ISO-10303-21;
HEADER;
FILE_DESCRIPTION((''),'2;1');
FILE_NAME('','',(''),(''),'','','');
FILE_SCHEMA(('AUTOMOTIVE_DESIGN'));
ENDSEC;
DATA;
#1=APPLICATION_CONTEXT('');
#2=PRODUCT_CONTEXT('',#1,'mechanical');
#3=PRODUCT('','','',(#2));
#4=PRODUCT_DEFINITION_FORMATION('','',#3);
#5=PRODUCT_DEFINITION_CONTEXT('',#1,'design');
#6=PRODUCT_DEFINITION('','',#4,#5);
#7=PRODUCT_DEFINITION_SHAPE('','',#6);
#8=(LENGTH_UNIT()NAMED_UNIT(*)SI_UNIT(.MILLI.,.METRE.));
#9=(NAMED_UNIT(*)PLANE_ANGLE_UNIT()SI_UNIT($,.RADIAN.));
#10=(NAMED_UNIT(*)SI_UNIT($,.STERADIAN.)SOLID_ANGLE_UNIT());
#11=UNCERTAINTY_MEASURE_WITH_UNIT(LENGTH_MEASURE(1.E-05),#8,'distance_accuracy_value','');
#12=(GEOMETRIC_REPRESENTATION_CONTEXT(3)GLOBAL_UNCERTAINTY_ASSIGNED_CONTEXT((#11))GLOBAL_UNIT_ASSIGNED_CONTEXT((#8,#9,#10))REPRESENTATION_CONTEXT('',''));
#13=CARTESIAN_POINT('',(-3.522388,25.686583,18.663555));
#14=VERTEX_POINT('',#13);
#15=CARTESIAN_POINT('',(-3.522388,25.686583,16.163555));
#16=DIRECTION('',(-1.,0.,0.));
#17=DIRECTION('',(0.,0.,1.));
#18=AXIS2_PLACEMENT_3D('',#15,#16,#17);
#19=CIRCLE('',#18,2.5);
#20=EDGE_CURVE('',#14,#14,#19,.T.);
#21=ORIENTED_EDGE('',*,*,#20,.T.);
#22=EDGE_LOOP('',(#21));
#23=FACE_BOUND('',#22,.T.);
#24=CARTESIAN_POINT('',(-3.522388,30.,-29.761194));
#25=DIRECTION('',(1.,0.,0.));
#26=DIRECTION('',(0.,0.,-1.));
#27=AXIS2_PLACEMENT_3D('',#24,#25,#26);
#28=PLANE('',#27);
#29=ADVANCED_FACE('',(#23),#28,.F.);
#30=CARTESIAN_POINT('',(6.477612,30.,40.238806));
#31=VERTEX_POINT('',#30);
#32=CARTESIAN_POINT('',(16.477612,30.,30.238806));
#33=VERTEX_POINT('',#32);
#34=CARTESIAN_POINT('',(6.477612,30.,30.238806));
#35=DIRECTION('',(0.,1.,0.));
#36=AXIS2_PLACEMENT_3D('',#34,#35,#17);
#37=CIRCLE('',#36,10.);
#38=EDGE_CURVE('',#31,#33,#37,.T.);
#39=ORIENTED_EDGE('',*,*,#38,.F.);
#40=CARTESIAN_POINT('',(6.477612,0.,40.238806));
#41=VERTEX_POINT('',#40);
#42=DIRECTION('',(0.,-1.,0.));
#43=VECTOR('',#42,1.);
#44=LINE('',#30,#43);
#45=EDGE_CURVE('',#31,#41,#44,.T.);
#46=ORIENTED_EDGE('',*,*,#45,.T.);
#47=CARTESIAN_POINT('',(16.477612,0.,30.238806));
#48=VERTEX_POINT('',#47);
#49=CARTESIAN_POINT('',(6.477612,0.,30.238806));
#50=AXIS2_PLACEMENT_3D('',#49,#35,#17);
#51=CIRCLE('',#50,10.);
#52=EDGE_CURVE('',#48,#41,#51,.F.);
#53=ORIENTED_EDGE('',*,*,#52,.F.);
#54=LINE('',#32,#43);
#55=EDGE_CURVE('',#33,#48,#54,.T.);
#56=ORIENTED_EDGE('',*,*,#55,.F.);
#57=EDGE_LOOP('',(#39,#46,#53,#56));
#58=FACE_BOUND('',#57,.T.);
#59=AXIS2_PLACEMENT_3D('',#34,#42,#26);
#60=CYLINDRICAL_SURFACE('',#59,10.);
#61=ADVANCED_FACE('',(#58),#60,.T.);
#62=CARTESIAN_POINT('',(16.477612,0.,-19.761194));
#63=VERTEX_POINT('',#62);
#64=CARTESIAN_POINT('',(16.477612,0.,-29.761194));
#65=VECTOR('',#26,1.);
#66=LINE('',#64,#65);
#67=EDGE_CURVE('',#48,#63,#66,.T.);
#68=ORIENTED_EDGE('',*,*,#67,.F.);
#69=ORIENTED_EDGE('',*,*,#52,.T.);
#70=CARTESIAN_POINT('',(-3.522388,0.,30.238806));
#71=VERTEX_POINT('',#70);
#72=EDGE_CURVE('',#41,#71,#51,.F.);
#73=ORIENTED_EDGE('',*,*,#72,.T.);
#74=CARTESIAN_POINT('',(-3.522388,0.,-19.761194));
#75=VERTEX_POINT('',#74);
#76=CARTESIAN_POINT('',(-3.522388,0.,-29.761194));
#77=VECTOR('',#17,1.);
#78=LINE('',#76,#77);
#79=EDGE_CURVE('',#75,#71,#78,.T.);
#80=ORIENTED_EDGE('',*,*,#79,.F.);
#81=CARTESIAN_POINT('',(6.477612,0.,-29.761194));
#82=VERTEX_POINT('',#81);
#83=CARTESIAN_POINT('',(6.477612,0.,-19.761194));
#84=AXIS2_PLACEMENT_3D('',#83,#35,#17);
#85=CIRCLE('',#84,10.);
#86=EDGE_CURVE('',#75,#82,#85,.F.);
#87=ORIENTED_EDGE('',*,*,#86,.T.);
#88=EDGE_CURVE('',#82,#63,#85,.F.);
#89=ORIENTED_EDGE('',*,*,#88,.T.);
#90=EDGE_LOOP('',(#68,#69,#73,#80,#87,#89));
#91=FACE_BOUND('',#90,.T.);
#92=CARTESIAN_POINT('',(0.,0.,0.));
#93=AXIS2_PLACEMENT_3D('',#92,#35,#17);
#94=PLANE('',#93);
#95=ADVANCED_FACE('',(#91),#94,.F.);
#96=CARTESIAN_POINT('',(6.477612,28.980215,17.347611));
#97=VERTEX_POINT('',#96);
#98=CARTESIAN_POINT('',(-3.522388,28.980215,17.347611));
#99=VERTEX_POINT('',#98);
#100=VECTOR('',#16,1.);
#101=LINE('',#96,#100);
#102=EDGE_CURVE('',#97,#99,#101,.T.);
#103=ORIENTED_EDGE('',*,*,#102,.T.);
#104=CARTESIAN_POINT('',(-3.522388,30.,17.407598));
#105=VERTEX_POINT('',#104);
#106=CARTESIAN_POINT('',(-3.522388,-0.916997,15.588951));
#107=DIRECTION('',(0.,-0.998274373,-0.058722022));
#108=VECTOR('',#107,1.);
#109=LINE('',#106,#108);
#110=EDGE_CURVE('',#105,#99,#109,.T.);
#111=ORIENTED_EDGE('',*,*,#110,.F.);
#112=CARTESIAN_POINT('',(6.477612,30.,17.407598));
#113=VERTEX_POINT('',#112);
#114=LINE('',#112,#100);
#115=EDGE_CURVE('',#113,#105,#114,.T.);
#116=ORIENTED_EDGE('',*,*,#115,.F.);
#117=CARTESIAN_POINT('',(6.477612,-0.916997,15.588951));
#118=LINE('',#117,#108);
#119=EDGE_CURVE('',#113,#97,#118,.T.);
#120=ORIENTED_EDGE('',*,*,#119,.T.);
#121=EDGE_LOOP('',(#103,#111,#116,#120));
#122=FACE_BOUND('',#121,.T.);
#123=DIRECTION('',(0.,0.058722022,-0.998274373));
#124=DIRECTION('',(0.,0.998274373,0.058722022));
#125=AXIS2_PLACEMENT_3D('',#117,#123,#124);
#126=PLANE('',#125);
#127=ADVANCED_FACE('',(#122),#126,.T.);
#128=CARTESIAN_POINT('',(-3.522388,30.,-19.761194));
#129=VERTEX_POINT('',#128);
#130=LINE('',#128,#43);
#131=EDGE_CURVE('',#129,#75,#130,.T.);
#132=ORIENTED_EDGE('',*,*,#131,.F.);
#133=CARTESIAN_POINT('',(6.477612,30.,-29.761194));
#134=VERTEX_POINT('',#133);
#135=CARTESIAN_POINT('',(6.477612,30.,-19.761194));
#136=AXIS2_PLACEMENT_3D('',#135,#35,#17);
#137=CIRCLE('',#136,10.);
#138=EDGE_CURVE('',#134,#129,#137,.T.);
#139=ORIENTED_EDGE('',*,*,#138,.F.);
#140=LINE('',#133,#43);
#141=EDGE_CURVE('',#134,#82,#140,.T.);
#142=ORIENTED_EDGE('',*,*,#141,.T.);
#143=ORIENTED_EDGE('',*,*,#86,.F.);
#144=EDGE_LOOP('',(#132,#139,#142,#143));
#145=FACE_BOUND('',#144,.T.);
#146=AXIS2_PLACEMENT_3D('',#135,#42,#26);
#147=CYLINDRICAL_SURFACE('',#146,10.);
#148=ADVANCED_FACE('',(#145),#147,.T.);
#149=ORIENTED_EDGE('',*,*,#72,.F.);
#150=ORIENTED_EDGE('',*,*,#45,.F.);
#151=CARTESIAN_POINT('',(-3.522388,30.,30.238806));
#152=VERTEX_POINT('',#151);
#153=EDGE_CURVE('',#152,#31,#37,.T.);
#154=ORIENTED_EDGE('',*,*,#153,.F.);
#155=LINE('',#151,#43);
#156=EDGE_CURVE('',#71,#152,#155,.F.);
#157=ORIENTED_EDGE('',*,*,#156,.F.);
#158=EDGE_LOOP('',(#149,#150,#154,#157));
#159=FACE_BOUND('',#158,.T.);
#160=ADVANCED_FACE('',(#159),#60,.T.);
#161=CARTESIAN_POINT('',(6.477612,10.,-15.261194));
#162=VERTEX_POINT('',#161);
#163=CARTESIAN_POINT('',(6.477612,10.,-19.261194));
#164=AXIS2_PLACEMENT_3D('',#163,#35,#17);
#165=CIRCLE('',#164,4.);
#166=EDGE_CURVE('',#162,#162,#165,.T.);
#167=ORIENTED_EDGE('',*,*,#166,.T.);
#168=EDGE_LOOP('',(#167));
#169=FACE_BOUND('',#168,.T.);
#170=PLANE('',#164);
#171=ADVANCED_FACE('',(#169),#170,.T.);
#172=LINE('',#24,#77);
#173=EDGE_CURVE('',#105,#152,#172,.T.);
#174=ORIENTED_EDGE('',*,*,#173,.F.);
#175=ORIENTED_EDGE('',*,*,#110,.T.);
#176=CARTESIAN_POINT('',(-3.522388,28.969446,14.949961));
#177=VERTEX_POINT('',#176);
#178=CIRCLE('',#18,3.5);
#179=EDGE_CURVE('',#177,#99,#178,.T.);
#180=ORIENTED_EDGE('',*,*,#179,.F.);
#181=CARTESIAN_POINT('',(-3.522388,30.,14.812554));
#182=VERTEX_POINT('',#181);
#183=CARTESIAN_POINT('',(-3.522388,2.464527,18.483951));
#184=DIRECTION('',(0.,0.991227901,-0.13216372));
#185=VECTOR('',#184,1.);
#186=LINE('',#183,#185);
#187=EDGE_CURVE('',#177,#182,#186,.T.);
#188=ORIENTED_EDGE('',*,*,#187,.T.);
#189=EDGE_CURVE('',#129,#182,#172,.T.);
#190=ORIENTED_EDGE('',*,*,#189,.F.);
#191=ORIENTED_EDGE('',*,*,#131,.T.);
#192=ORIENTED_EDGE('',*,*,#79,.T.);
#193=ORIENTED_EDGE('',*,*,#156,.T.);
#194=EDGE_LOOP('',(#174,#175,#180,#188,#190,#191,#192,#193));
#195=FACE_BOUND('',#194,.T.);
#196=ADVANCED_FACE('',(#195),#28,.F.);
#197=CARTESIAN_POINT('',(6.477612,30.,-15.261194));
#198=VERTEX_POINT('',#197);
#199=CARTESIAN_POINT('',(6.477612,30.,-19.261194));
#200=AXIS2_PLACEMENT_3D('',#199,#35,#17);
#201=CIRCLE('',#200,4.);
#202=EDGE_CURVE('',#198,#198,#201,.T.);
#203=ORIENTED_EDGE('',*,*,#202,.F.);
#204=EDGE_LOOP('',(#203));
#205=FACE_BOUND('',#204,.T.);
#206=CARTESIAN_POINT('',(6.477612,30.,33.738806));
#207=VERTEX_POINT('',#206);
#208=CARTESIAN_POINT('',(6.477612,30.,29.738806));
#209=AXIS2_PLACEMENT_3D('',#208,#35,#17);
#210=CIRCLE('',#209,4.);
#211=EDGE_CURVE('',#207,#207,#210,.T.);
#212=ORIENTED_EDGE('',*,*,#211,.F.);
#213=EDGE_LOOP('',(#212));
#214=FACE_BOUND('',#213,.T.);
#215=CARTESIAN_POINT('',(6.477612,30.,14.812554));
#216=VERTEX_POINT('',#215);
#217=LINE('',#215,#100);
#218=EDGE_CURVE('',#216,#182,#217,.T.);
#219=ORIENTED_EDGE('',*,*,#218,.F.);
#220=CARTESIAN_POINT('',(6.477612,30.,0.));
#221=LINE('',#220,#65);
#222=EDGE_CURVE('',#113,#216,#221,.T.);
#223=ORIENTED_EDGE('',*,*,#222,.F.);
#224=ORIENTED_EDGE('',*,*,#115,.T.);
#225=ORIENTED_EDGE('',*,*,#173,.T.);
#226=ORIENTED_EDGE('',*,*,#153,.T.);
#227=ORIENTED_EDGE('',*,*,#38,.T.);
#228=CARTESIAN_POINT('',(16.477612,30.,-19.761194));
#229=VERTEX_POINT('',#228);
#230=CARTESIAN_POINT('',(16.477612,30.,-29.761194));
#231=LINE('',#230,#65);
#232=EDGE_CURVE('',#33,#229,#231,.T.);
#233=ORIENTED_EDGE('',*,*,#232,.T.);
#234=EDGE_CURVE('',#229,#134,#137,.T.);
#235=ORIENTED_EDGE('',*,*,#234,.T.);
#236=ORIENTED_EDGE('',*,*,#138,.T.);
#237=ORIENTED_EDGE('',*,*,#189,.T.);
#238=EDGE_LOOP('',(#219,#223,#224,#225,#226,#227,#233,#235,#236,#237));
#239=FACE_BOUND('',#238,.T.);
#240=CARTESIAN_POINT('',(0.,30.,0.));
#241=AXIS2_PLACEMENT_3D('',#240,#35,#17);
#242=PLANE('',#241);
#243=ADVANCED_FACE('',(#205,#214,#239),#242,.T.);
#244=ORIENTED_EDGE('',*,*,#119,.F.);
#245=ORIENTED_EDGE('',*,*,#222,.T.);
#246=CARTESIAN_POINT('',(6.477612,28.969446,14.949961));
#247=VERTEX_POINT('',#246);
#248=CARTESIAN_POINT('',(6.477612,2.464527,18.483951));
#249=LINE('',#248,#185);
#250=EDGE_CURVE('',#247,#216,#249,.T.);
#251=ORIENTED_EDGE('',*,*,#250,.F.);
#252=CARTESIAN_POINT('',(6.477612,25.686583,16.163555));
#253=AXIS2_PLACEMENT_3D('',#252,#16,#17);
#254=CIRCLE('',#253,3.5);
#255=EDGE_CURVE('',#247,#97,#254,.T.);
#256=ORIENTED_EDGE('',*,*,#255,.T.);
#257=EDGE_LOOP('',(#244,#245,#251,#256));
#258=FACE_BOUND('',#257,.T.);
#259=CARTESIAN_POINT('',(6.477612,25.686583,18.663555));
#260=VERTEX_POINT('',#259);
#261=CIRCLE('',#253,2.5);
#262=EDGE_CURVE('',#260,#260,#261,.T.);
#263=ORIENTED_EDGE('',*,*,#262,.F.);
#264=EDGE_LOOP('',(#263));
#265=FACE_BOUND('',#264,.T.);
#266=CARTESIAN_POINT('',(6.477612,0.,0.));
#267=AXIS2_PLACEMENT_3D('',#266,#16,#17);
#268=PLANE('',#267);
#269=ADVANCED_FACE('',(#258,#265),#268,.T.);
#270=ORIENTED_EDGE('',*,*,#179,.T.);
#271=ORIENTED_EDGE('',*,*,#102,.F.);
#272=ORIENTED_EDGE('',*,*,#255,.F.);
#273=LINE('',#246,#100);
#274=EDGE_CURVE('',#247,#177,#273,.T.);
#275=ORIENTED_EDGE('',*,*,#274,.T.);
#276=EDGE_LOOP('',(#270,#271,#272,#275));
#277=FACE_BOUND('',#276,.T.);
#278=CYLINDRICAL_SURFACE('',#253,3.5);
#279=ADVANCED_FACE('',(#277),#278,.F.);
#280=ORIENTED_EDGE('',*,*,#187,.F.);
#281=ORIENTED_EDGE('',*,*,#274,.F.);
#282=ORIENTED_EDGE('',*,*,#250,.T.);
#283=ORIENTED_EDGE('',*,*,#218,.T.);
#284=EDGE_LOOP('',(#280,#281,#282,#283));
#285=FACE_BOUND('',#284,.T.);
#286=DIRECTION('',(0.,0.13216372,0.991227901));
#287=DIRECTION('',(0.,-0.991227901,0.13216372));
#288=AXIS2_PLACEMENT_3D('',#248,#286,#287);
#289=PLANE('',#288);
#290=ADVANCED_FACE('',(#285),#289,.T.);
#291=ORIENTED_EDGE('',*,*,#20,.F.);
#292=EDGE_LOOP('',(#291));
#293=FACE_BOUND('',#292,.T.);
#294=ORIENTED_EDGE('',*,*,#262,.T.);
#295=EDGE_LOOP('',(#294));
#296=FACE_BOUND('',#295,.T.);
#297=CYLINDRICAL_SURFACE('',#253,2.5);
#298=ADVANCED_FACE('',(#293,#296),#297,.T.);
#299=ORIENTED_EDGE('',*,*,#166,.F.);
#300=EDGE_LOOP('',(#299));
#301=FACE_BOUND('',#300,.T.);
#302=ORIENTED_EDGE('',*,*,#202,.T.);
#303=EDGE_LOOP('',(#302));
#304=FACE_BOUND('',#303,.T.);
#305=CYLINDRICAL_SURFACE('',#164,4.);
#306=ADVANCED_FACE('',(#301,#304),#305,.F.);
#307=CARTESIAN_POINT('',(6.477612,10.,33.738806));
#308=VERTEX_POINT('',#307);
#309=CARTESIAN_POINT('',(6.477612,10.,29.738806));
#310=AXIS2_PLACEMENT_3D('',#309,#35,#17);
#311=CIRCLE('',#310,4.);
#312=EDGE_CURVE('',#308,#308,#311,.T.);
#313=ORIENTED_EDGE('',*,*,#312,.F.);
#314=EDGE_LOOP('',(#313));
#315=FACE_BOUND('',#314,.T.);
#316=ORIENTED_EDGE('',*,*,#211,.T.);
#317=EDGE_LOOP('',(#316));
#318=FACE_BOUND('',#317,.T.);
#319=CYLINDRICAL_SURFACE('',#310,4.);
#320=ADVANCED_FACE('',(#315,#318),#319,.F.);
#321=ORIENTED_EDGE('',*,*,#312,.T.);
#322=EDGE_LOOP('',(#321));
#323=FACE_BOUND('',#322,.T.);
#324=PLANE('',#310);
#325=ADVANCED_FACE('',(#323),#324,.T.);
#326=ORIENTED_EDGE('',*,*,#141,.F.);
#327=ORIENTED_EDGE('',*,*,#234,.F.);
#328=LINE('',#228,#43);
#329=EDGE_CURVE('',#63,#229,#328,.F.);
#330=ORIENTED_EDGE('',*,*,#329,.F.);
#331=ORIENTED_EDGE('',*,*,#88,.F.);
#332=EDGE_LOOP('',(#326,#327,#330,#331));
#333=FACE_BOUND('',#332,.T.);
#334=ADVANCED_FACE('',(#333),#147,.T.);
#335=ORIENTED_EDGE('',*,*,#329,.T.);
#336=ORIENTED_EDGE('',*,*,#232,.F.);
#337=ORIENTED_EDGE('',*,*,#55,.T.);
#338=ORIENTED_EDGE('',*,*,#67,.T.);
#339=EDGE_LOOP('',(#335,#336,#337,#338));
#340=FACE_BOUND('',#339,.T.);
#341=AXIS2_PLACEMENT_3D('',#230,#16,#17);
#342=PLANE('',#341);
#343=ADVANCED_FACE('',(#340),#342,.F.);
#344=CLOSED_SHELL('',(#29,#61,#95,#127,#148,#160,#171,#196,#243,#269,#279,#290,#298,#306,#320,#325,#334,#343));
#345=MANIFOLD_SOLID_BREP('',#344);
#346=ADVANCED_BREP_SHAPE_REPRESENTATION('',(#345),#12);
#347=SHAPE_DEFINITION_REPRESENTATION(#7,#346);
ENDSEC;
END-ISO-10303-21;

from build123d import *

# Parameters (mm, degrees)
SKETCH2_W           = 20
SKETCH2_H           = 70
BOSS_EXTRUDE1_DEPTH = 30
SKETCH3_R           = 4
CUT_EXTRUDE1_DEPTH  = 20
SKETCH4_R           = 2.5
CUT_EXTRUDE2_DEPTH  = 10
FILLET1_R           = 10


with BuildPart() as part:
    # Sketch2 → Boss-Extrude1 (new body)
    with BuildSketch(Plane(origin=(0, 0, 0), x_dir=(1, 0, 0), z_dir=(0, 1, 0))):
        with Locations((6.47761194, -5.23880597)):
            Rectangle(SKETCH2_W, SKETCH2_H)
    extrude(amount=BOSS_EXTRUDE1_DEPTH)

    # Sketch3 → Cut-Extrude1 (cut)
    with BuildSketch(Plane(origin=(0, 30, 0), x_dir=(1, 0, 0), z_dir=(0, 1, 0))):
        with Locations(Location((6.47761194, 19.26119403, 0), (0, 0, 270))):
            Circle(SKETCH3_R)
        with Locations(Location((6.47761194, -29.73880597, 0), (0, 0, 270))):
            Circle(SKETCH3_R)
    extrude(amount=-CUT_EXTRUDE1_DEPTH, mode=Mode.SUBTRACT)

    # Sketch4 → Cut-Extrude2 (cut)
    with BuildSketch(Plane.ZY.offset(3.52238806)):
        with BuildLine():
            Line((17.415034126, 30.126407987), (14.795699792, 30.126407987))
            Line((14.795699792, 30.126407987), (14.949961333, 28.969446425))
            ThreePointArc((14.949961333, 28.969446425), (16.17927412, 22.186618473), (17.347611009, 28.980215007))
            Line((17.347611009, 28.980215007), (17.415034126, 30.126407987))
        make_face()
        with Locations((16.163554702, 25.686583173)):
            Circle(SKETCH4_R, mode=Mode.SUBTRACT)
    extrude(amount=-CUT_EXTRUDE2_DEPTH, mode=Mode.SUBTRACT)

    # Fillet1
    fillet1_edges = [part.edges().sort_by_distance(p)[0] for p in [
        (-3.52238806, 15, -29.76119403),
        (16.47761194, 15, -29.76119403),
        (16.47761194, 15, 40.23880597),
        (-3.52238806, 15, 40.23880597),
    ]]
    fillet(fillet1_edges, radius=FILLET1_R - 0.0001)  # a hair under: the kernel refuses the full size


solid = part.part
